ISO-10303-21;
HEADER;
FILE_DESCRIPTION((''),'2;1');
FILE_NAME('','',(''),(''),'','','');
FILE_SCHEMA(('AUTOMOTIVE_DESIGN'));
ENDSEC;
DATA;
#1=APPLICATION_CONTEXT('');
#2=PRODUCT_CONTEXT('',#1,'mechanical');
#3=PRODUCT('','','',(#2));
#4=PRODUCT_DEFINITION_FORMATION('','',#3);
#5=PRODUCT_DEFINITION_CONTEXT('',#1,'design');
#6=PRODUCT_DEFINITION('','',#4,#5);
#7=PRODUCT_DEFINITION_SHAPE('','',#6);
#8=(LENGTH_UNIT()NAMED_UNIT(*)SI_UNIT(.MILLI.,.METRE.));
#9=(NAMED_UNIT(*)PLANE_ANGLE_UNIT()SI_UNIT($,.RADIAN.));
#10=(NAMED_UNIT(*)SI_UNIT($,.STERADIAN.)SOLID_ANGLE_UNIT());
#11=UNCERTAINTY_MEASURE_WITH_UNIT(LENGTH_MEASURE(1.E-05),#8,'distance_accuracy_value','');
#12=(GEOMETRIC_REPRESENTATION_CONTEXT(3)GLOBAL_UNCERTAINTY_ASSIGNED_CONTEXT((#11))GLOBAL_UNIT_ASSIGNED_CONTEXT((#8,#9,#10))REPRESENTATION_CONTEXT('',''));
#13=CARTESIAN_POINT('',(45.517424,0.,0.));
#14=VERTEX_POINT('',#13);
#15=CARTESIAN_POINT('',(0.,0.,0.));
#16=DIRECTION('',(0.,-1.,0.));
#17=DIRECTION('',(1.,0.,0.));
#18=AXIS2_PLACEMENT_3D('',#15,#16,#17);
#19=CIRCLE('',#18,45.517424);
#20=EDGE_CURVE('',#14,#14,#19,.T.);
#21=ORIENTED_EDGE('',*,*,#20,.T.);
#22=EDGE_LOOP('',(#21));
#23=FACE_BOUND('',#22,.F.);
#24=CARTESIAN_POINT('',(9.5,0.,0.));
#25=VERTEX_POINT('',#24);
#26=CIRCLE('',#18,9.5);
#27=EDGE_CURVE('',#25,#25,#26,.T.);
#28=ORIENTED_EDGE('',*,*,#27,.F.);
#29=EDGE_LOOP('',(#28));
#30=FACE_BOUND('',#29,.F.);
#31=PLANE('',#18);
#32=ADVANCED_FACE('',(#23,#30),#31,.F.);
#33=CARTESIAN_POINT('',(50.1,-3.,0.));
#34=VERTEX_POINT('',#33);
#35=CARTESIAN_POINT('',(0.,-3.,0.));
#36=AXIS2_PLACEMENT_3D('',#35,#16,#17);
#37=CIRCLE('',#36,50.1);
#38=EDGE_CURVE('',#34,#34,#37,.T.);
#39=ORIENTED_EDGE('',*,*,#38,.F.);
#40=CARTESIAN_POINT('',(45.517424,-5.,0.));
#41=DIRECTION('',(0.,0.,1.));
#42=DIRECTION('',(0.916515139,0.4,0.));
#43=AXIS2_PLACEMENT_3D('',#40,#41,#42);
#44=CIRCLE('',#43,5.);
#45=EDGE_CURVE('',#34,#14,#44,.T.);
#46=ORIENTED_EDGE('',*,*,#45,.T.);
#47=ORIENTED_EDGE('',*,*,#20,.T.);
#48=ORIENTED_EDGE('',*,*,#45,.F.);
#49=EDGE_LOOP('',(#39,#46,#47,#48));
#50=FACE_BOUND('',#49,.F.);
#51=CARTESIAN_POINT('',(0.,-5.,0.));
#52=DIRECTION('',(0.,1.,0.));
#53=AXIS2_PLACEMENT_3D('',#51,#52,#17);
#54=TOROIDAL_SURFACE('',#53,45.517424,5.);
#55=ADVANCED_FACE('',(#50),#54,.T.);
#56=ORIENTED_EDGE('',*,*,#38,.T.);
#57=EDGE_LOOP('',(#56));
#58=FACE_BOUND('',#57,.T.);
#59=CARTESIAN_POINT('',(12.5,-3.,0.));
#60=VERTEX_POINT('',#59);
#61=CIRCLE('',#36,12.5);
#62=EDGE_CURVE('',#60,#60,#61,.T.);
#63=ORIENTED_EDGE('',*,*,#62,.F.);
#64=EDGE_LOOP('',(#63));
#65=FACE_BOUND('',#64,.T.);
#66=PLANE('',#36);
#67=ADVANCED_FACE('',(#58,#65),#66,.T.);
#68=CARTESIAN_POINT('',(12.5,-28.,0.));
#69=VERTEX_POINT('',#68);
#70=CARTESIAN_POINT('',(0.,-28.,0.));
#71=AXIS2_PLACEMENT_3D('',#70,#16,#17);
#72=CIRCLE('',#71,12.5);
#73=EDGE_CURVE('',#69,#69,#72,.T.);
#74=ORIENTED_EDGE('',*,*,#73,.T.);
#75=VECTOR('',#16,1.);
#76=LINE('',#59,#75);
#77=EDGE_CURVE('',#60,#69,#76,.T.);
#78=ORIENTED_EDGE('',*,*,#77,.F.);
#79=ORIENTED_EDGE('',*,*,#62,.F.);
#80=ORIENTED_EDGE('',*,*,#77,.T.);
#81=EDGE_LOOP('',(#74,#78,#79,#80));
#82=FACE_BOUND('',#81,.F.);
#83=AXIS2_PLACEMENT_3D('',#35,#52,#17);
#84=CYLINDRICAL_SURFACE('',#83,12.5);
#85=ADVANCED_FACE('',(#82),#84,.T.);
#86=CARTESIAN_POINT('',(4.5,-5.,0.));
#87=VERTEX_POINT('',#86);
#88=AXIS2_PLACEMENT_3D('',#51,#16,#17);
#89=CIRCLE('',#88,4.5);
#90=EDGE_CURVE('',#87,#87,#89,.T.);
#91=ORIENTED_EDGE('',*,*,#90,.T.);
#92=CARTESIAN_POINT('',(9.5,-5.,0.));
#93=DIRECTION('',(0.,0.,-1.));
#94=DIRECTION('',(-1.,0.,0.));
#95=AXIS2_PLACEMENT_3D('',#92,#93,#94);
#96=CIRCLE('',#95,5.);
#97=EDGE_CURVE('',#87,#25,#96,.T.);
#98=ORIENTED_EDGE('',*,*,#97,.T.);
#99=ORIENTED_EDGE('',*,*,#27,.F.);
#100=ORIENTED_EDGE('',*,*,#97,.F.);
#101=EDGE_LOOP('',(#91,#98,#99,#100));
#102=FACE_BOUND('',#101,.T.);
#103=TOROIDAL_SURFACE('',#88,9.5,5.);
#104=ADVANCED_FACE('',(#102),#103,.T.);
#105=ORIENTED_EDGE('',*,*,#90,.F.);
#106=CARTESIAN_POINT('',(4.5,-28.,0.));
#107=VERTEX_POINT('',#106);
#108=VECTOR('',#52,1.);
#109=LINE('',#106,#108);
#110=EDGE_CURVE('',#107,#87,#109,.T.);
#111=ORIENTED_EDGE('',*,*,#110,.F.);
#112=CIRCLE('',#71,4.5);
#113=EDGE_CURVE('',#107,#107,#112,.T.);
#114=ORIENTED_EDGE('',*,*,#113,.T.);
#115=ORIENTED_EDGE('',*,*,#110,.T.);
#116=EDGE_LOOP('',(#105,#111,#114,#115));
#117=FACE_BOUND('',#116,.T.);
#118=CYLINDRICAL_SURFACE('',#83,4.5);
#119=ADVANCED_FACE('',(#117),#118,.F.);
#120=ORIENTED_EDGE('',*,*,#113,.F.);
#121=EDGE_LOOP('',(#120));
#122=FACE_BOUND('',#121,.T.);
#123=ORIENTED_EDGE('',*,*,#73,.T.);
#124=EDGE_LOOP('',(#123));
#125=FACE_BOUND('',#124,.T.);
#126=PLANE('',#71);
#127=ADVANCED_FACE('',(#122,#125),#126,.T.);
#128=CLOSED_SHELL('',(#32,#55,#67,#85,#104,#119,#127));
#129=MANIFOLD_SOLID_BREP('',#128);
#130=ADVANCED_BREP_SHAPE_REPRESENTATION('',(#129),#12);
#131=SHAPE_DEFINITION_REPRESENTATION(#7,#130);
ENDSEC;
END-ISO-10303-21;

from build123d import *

# Parameters (mm, degrees)
F0_R     = 50.1
F0_R_2   = 4.5
F1_DEPTH = 3
F2_R     = 12.5
F2_R_2   = 4.5
F3_DEPTH = 25


# Not quite as in the source:
# - a fillet or chamfer that OpenCascade refuses, or shapes differently, is made with other operations: its cross-section is extruded or revolved along the edge and cut away or added


with BuildPart() as f1:
    # F0 (on Front) → F1 (new body)
    with BuildSketch(Plane.XZ):
        Circle(F0_R)
        Circle(F0_R_2, mode=Mode.SUBTRACT)
    extrude(amount=F1_DEPTH)

    # F2 (on face) → F3 (join)
    with BuildSketch(Plane.XZ.offset(3)):
        Circle(F2_R)
        Circle(F2_R_2, mode=Mode.SUBTRACT)
    extrude(amount=F3_DEPTH)

    # F4: fillet of radius 5 on 2 edges, made by hand

    # F4_s1 → F4_t2 (revolve, cut)
    with BuildSketch(Plane.XY):
        with BuildLine():
            ThreePointArc((50.1, -3), (48.2560370926, -0.8166998673), (45.517424305, 0))
            Line((45.517424305, 0), (50.1, 0))
            Line((50.1, 0), (50.1, -3))
        make_face()
    revolve(axis=Axis((0, 0, 0), (0, -1, 0)), mode=Mode.SUBTRACT)

    # F4_s3 → F4_t4 (revolve, cut)
    with BuildSketch(Plane.XY):
        with BuildLine():
            ThreePointArc((4.5, -5), (5.9644660941, -1.4644660941), (9.5, 0))
            Line((9.5, 0), (4.5, 0))
            Line((4.5, 0), (4.5, -5))
        make_face()
    revolve(axis=Axis((0, 0, 0), (0, -1, 0)), mode=Mode.SUBTRACT)


solid = f1.part
